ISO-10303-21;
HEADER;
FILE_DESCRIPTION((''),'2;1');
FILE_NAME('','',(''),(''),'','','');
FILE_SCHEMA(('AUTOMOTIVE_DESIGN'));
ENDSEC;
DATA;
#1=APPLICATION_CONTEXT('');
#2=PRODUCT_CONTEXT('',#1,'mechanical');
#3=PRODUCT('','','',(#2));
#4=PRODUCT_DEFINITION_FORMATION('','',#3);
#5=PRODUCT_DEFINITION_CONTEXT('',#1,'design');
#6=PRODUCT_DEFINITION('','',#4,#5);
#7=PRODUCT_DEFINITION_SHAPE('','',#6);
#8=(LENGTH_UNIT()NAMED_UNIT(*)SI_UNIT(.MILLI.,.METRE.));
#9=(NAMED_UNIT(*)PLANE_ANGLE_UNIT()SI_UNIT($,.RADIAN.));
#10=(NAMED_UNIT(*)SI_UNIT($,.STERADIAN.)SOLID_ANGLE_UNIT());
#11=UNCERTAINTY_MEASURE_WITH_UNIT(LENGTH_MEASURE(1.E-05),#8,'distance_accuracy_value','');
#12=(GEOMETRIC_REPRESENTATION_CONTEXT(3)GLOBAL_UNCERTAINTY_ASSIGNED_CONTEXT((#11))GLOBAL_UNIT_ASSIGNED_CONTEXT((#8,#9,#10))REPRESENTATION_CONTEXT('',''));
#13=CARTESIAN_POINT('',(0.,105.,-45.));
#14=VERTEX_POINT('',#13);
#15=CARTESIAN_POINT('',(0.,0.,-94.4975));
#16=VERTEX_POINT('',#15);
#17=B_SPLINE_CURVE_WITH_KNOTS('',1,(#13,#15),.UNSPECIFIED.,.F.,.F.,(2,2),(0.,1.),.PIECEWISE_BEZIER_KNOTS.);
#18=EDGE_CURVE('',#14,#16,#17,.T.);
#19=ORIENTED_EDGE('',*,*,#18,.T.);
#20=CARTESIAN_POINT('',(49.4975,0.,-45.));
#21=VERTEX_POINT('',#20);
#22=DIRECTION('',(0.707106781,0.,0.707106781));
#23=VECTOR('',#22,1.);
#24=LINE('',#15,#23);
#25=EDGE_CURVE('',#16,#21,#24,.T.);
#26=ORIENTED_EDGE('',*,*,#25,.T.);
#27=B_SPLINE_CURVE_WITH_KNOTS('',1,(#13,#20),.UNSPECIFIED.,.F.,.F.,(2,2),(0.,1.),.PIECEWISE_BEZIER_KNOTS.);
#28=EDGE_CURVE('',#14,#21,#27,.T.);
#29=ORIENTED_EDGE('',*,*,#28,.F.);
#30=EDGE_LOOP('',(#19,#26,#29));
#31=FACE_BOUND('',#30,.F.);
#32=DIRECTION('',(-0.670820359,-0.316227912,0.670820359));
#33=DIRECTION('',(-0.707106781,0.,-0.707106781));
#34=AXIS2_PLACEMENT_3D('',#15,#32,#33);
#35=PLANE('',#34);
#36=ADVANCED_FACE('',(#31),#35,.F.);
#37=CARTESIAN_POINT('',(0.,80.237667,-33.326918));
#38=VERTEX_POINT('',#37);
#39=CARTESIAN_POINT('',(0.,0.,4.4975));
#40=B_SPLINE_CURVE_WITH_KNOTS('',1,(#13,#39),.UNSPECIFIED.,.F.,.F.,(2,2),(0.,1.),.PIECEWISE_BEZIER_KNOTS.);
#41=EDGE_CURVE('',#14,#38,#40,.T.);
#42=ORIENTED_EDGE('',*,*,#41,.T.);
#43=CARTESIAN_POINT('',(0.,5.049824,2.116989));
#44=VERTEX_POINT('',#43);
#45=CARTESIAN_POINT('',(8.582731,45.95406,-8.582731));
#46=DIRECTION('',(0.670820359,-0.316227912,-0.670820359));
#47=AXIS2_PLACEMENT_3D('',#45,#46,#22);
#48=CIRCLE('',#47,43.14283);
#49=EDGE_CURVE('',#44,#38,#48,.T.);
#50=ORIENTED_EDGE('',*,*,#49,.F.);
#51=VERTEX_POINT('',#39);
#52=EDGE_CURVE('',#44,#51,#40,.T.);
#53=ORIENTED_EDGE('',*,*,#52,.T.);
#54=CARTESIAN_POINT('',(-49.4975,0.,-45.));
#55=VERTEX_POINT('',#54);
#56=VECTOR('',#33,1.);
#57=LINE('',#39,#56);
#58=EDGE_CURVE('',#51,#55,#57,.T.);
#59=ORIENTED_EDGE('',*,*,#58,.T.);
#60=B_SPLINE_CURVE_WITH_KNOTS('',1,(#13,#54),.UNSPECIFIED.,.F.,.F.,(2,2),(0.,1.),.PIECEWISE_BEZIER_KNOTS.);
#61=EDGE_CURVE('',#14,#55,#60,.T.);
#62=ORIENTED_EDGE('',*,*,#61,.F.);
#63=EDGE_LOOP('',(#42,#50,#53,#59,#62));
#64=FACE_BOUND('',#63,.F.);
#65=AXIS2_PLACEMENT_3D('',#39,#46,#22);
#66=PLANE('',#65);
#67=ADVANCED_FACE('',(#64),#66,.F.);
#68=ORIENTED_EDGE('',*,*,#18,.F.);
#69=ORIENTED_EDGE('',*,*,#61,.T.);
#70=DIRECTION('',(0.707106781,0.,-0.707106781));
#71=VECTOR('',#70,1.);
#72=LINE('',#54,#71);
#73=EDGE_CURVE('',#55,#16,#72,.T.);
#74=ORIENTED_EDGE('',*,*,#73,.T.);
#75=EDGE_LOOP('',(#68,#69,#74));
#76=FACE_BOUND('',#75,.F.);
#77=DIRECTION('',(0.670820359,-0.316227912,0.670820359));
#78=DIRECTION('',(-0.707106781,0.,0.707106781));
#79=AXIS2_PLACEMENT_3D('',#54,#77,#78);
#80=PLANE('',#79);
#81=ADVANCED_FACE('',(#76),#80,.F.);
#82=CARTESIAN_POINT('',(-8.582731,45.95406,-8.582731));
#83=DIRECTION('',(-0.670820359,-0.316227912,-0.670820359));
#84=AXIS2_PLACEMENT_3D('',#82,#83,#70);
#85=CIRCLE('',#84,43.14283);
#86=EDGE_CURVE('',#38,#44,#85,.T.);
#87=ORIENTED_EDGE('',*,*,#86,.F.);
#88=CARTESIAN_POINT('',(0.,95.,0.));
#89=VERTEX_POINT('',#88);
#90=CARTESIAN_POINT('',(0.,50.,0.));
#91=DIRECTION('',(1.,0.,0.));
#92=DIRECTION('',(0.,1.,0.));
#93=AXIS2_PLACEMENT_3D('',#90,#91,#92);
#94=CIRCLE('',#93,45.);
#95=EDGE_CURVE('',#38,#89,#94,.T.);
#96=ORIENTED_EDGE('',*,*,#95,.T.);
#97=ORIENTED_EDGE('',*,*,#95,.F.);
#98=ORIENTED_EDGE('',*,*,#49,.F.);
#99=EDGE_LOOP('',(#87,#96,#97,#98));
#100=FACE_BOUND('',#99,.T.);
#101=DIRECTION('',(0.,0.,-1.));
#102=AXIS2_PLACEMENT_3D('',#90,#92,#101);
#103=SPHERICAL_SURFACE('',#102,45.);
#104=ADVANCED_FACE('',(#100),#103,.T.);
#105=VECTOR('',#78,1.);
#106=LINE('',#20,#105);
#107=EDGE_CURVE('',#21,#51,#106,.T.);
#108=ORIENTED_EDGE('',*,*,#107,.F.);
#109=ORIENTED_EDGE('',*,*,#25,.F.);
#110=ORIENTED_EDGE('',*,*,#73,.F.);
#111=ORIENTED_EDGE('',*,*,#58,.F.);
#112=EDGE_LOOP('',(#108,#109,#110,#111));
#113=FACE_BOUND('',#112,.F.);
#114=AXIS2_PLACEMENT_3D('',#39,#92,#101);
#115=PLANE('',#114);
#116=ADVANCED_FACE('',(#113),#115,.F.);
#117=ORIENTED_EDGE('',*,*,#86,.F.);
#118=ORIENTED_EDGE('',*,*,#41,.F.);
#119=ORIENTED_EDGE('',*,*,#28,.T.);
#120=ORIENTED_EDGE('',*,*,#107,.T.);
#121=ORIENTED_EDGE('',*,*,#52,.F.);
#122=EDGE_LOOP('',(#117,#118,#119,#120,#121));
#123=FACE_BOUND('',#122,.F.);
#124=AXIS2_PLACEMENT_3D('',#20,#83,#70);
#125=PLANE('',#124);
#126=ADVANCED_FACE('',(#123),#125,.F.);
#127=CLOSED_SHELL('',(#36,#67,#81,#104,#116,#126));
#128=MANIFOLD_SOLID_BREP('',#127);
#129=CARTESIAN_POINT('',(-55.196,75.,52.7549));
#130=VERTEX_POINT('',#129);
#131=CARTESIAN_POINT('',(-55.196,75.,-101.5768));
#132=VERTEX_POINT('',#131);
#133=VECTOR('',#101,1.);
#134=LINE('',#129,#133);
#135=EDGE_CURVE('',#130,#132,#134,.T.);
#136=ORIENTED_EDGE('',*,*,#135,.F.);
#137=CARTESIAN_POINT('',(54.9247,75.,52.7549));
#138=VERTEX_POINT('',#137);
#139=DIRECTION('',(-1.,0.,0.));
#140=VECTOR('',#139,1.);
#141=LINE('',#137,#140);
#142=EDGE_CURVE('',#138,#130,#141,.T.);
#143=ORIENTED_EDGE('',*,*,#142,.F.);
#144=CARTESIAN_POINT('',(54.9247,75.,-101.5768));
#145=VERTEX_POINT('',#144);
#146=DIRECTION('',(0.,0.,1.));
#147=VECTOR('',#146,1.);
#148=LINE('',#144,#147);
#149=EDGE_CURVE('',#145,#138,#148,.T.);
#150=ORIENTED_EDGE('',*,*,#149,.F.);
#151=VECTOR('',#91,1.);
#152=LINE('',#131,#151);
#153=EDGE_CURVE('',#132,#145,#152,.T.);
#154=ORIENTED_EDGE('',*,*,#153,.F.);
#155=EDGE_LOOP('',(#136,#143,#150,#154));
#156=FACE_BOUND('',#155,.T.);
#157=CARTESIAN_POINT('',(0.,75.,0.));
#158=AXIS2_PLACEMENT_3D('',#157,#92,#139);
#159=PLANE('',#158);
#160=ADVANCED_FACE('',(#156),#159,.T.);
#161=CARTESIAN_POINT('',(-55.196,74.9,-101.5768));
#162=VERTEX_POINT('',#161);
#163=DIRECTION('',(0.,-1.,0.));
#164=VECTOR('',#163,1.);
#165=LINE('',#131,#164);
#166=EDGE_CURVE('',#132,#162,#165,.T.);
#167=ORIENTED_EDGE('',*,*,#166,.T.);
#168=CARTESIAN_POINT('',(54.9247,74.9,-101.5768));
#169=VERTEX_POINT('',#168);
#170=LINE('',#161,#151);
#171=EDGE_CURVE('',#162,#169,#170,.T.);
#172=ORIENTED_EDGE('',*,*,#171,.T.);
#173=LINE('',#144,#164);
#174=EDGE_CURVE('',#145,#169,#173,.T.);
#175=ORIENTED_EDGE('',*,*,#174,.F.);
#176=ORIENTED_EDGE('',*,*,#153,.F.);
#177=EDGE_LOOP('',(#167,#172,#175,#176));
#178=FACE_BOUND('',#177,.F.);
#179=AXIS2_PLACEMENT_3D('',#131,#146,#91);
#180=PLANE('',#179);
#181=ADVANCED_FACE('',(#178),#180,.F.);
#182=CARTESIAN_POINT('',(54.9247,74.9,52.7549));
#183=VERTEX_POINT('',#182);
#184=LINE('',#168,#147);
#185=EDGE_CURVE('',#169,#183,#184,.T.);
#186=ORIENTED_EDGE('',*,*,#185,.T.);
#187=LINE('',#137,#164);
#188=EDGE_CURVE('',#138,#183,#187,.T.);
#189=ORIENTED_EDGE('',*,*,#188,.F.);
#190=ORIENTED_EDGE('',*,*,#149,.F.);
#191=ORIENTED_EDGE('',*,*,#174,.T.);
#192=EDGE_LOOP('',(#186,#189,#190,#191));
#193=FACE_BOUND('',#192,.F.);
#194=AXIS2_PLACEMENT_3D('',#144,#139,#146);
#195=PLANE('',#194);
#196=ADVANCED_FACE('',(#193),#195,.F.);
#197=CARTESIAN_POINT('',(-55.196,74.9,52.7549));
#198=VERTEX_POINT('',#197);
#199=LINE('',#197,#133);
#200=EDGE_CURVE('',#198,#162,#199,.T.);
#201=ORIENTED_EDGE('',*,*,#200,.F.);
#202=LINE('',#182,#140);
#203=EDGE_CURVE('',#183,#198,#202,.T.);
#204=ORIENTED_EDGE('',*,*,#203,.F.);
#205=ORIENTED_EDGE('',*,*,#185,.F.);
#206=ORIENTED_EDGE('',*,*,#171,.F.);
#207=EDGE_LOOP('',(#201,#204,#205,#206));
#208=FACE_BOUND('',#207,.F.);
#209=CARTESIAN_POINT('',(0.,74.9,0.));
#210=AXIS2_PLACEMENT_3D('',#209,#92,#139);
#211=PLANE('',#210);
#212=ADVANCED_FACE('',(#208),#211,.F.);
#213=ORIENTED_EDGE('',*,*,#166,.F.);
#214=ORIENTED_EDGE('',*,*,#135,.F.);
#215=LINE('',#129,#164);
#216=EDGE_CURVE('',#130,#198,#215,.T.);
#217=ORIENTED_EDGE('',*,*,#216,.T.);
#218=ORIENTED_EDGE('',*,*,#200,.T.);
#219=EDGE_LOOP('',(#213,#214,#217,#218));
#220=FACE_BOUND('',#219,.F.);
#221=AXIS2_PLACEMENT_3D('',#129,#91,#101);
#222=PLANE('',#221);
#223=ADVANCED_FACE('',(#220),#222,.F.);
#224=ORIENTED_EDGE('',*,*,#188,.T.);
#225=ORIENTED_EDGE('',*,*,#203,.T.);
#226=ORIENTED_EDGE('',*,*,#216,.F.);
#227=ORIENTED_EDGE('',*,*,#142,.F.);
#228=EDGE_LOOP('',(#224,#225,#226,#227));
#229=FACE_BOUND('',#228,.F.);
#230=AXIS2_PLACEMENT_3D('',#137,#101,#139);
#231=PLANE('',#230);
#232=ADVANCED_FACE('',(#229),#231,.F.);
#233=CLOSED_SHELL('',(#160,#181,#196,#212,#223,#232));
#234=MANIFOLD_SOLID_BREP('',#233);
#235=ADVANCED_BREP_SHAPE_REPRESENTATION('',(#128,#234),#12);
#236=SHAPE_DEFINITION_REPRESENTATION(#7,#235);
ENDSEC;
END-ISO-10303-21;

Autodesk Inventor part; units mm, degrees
ref_plane "YZ Plane" through (0, 0, 0) normal (1, 0, 0) x (0, 1, 0)
ref_plane "XY Plane" through (0, 0, 0) normal (0, 0, 1) x (1, 0, 0)
sketch "Эскиз1" plane through (0, 0, 0) normal (0, 0, 1) x (1, 0, 0)
  point P0 (0, 0)
sketch "Эскиз2" plane through (0, 0, 0) normal (1, 0, 0) x (0, 1, 0)
  circle A0 centre (50, 0) radius 45
  line L0 (5, 0) -> (95, 0)
  point P0 (0, 0)
revolve "Вращение1" add sketch "Эскиз2" angle 360 about axis through (0, 5, 0) along (0, 1, 0) picked at (45.3647, -14.2658) contours A0 L0
sketch "Эскиз3" plane through (0, 0, 0) normal (0, 1, 0) x (-1, 0, 0)
  line L0 (0, 4.4975) -> (49.4975, -45)
  line L1 (49.4975, -45) -> (0, -94.4975)
  line L2 (0, -94.4975) -> (-49.4975, -45)
  line L3 (-49.4975, -45) -> (0, 4.4975)
  point P0 (0, 0)
  point P1 (0, -45)
ref_plane "РабПлоскость2" through (0, 105, 0) normal (0, 1, 0) x (-1, 0, 0)
ref_plane "РабПлоскость1" through (0, 75, 0) normal (0, 1, 0) x (-1, 0, 0)
sketch "Эскиз4" plane through (0, 105, 0) normal (0, 1, 0) x (-1, 0, 0)
  point P0 (0, 0)
  point P1 (0, -45)
loft "Лофт1" add profiles "Эскиз3" section 1 point at (0, 105, -45)
sketch "Эскиз6" plane through (0, 75, 0) normal (0, 1, 0) x (-1, 0, 0)
  point P0 (0, 0)
sketch "Эскиз8" plane through (0, 75, 0) normal (0, 1, 0) x (-1, 0, 0)
  line L0 (55.196, -101.5768) -> (-54.9247, -101.5768)
  line L1 (-54.9247, -101.5768) -> (-54.9247, 52.7549)
  line L2 (-54.9247, 52.7549) -> (55.196, 52.7549)
  line L3 (55.196, 52.7549) -> (55.196, -101.5768)
  point P0 (0, 0)
extrude "Выдавливание3" add sketch "Эскиз8" against normal blind 0.1 separate body
properties part number "а"
